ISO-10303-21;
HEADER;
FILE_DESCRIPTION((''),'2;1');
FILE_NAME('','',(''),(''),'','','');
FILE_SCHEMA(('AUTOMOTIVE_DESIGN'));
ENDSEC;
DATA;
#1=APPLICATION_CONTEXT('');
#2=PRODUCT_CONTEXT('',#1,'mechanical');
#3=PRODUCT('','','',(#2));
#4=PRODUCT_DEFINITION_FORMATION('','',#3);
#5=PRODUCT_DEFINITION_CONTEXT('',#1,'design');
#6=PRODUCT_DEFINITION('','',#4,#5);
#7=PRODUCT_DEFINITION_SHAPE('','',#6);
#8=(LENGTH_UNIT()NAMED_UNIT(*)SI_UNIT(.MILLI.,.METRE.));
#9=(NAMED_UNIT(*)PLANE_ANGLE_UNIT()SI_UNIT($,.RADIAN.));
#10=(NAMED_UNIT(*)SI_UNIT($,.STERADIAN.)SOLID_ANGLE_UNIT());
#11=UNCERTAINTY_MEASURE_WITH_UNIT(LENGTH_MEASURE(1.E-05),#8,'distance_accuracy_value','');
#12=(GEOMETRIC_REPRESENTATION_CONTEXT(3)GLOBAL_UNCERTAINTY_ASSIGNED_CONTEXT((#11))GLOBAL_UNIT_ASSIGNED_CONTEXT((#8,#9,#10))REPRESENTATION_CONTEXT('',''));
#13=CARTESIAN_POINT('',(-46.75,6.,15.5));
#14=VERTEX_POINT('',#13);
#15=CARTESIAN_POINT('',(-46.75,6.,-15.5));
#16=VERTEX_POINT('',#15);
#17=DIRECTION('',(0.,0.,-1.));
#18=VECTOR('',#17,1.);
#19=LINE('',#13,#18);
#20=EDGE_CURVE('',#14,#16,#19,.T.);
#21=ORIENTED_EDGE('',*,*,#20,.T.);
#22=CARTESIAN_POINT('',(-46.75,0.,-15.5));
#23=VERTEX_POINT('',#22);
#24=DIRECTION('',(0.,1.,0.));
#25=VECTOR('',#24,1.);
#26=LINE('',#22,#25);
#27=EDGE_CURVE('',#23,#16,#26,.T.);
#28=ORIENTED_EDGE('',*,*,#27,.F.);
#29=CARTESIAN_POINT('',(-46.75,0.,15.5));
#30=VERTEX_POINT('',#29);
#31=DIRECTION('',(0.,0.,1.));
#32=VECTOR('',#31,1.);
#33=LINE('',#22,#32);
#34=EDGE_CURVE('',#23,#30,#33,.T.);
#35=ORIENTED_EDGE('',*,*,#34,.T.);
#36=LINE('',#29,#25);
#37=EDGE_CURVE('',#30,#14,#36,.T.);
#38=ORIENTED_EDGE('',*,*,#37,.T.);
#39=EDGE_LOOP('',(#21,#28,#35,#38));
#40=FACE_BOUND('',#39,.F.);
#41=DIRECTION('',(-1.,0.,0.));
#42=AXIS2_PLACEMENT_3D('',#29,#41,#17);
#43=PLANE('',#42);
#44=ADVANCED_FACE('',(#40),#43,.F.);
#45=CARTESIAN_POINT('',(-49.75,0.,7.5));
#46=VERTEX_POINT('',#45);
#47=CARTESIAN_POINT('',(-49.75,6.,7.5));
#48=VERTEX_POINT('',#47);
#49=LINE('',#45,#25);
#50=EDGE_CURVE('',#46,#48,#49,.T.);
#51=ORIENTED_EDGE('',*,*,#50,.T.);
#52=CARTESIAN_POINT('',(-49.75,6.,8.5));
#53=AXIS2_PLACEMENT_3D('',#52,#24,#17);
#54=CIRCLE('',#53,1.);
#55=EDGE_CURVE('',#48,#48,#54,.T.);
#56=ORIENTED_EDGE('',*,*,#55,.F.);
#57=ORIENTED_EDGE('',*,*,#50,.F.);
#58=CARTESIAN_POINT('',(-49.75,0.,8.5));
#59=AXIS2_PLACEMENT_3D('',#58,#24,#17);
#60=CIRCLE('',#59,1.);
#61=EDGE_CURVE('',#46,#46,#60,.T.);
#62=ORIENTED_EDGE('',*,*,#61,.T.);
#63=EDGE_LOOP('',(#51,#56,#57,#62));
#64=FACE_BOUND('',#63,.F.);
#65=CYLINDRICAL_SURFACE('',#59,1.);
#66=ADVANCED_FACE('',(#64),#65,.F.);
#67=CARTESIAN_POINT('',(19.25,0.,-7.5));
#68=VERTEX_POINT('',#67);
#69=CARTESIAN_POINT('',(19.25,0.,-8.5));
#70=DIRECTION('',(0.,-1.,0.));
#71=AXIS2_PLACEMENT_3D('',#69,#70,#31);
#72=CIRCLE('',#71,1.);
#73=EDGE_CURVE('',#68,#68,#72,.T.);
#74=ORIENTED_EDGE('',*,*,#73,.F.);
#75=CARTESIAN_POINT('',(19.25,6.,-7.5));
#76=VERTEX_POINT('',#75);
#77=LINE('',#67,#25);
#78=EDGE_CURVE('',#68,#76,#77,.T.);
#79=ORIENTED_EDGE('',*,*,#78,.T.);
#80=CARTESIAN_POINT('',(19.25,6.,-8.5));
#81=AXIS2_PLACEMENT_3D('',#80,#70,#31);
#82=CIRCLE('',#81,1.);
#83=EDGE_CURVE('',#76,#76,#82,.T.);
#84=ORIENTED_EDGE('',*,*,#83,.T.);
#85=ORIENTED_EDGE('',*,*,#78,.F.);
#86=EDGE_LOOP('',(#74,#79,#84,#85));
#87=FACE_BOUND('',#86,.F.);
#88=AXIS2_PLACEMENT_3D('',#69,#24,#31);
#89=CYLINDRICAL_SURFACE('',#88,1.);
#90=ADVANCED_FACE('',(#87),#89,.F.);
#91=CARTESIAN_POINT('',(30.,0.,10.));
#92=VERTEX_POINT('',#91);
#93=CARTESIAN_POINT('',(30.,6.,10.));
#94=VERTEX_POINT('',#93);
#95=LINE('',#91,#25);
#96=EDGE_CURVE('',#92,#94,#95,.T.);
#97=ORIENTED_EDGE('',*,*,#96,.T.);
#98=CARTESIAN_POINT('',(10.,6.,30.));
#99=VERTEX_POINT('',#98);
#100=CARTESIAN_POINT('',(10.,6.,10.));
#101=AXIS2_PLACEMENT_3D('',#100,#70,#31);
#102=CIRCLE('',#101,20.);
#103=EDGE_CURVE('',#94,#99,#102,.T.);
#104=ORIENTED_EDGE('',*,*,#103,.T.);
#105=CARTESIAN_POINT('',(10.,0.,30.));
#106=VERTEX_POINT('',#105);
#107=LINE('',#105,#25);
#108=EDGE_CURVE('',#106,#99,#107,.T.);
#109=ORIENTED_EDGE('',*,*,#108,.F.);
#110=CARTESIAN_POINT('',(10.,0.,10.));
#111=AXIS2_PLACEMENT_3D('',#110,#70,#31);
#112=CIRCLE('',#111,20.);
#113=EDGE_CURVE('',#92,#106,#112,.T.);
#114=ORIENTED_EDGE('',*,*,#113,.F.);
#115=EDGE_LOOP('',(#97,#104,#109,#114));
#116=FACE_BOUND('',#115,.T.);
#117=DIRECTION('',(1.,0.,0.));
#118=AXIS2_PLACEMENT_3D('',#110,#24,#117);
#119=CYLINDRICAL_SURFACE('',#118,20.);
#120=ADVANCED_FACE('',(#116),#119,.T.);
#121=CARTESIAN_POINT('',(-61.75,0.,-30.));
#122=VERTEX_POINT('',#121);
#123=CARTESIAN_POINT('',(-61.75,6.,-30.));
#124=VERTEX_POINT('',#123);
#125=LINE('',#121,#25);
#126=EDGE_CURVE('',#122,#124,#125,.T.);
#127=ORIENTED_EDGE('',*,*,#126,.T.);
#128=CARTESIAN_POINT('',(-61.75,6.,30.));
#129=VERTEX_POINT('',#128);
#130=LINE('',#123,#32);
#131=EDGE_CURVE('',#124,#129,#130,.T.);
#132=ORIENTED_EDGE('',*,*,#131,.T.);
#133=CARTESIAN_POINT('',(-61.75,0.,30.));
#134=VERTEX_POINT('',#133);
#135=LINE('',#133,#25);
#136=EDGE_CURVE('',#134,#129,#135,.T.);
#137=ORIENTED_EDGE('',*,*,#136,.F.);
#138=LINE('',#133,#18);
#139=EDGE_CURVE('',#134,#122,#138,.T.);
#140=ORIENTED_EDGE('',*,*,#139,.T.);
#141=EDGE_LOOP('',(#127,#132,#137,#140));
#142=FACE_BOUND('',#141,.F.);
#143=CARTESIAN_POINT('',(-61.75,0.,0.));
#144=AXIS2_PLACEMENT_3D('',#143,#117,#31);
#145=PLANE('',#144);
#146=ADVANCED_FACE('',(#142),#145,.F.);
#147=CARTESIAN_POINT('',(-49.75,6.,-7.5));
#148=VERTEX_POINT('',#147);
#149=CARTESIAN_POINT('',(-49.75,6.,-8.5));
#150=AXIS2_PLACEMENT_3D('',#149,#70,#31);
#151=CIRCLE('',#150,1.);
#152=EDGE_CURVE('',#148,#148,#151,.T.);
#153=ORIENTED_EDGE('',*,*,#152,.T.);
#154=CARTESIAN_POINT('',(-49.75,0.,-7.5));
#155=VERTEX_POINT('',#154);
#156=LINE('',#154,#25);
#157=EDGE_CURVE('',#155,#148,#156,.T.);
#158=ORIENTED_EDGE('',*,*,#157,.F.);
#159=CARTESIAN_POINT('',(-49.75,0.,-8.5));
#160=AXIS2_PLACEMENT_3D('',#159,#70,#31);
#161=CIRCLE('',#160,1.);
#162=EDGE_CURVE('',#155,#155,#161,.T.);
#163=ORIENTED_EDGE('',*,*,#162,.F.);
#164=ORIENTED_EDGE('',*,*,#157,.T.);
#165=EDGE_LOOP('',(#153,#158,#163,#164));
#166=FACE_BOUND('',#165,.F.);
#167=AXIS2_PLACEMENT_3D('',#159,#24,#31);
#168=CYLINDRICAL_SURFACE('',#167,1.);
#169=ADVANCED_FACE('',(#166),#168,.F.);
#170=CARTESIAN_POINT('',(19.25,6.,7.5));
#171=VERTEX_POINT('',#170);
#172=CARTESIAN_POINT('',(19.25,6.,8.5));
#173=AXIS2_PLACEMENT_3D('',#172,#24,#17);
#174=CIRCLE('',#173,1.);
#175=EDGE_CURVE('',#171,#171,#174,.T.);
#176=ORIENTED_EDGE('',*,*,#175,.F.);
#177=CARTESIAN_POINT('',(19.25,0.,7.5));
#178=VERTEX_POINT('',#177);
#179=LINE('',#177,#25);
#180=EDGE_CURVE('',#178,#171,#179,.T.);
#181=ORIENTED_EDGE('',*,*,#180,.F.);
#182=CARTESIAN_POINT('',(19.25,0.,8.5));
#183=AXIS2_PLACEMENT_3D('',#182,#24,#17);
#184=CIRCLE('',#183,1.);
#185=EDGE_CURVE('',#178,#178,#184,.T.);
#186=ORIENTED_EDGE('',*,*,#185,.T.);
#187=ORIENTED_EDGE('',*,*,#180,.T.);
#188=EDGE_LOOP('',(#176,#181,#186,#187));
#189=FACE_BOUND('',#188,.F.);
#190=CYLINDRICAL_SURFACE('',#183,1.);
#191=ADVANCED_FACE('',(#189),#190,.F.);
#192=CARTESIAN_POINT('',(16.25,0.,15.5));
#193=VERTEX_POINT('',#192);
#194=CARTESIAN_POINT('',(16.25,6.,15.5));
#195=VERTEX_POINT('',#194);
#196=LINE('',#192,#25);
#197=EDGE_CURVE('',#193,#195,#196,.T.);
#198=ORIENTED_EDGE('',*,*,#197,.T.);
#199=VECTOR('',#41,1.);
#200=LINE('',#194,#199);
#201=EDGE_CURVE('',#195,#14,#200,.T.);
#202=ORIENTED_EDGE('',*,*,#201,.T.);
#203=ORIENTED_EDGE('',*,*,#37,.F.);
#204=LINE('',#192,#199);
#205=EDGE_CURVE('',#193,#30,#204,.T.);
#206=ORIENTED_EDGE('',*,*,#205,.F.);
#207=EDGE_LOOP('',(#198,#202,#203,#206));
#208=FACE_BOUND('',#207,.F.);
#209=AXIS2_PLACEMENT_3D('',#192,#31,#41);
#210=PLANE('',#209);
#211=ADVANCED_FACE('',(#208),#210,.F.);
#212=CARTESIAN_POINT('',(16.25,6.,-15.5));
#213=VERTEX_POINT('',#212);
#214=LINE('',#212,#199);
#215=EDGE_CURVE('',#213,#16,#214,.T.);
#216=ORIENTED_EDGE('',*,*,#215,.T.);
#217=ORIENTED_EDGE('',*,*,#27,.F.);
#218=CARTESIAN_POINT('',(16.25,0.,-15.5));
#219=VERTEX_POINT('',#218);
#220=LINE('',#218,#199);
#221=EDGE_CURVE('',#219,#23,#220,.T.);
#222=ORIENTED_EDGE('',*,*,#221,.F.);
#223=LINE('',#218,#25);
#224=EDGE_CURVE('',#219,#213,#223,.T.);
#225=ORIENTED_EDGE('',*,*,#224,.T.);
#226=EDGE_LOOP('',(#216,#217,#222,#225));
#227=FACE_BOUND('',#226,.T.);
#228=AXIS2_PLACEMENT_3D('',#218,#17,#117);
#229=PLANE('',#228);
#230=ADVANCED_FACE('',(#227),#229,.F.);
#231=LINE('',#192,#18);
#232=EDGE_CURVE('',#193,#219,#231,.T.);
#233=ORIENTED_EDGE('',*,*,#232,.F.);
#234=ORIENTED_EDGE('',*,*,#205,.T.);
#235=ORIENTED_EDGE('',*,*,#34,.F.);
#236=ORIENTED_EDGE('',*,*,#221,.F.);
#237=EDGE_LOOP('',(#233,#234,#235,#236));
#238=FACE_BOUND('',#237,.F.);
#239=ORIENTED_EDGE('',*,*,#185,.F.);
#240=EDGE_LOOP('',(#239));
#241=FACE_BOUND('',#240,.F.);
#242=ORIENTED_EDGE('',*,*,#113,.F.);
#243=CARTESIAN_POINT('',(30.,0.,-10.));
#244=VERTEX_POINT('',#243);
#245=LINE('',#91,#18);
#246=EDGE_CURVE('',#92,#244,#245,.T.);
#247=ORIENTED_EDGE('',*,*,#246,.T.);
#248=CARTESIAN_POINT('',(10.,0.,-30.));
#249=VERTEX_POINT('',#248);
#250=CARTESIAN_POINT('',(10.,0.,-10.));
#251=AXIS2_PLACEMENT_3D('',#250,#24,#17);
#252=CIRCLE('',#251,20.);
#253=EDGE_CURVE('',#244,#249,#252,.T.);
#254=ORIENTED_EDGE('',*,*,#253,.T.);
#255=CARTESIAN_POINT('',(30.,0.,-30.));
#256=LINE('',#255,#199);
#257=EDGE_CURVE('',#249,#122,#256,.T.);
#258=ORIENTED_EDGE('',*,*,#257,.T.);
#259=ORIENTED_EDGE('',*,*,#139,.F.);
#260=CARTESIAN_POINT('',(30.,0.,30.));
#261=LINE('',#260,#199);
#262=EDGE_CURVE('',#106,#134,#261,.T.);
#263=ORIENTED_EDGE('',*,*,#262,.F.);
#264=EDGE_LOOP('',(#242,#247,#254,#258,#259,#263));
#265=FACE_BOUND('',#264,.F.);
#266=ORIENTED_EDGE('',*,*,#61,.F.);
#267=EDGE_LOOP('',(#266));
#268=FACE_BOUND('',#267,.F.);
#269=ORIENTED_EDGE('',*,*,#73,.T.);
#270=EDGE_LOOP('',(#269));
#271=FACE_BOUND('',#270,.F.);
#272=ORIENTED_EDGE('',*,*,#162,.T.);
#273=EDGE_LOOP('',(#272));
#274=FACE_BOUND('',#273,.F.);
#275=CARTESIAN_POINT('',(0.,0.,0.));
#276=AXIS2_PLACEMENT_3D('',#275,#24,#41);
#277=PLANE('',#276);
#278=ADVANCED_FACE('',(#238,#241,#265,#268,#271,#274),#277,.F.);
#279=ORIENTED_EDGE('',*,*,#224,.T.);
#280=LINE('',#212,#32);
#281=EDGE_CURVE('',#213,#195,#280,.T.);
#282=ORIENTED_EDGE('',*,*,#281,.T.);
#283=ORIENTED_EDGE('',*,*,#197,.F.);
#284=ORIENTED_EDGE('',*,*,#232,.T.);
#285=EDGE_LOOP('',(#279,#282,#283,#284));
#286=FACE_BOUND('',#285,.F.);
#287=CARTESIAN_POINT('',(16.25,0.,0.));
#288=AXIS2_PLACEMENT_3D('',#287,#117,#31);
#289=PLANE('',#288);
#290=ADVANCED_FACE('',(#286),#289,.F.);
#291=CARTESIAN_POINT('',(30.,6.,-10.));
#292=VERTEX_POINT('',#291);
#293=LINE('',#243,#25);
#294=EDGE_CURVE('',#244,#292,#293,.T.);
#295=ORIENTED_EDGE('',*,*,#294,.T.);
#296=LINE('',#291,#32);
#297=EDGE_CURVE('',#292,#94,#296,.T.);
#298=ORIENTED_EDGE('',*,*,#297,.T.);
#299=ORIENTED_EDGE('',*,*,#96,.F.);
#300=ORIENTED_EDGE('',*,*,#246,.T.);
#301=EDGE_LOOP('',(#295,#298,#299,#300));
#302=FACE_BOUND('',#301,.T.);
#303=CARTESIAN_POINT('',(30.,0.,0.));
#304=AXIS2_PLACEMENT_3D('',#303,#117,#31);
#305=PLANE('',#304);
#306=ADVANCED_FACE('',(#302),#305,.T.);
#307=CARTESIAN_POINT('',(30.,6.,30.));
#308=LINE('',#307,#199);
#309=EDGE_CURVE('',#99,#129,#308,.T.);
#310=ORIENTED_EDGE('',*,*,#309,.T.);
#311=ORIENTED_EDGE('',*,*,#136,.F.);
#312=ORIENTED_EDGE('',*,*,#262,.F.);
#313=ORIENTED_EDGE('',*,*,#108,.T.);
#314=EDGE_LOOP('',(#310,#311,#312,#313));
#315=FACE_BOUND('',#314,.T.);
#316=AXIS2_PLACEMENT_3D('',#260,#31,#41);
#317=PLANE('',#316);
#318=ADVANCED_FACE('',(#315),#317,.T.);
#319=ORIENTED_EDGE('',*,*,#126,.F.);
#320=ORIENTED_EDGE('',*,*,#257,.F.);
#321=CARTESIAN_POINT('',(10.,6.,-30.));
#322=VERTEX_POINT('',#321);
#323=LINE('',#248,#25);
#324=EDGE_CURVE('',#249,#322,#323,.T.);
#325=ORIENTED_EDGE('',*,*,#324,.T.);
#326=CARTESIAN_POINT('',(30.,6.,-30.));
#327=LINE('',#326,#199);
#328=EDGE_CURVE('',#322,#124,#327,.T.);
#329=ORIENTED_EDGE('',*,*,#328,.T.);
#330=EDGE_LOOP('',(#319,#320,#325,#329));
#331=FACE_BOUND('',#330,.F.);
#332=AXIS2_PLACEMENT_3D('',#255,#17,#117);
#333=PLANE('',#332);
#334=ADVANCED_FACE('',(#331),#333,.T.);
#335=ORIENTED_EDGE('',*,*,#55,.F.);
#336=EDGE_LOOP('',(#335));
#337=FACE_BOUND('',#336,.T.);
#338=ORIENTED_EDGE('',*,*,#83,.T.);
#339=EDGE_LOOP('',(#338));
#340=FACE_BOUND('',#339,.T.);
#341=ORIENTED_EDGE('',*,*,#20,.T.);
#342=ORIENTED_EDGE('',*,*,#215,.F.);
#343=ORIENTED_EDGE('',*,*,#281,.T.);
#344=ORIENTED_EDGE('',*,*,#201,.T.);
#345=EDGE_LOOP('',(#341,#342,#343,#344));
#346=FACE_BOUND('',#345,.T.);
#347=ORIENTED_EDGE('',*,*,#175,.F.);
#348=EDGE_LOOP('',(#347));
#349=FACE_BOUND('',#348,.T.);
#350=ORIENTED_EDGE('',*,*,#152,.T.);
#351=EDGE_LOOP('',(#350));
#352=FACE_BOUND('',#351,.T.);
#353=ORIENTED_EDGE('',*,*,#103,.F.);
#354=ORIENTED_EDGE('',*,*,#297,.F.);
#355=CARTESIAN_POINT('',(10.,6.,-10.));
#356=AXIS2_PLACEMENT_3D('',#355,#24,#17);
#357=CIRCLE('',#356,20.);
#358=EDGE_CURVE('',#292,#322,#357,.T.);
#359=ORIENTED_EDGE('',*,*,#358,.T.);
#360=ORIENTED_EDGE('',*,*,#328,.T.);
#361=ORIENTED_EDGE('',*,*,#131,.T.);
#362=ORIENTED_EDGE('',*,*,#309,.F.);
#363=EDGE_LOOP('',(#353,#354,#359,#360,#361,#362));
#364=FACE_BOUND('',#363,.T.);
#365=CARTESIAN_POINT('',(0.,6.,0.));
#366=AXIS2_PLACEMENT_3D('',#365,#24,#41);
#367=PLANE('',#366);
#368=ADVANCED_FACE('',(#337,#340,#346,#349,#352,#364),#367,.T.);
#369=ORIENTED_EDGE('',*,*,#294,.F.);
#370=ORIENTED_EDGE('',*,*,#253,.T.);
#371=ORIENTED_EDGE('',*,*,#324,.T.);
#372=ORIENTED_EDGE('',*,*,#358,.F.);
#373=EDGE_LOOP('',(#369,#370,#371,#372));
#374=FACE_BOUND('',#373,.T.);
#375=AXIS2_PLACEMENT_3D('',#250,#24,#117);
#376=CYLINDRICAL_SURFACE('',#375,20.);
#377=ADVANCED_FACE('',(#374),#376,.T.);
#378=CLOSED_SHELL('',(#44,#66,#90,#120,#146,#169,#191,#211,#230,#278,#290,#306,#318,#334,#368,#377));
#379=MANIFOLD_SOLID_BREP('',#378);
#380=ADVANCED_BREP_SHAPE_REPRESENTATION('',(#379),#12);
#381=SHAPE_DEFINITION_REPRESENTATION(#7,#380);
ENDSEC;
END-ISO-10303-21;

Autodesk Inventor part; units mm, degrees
ref_plane "YZ Plane" through (0, 0, 0) normal (1, 0, 0) x (0, 1, 0)
ref_plane "XZ Plane" through (0, 0, 0) normal (0, 1, 0) x (-1, 0, 0)
ref_plane "XY Plane" through (0, 0, 0) normal (0, 0, 1) x (1, 0, 0)
sketch "Sketch1" plane through (0, 0, 0) normal (0, 1, 0) x (-1, 0, 0)
  line L0 (0, 0) -> (-16.25, 0)
  line L1 (0, 0) -> (46.75, 0)
  line L2 (300, 0) -> (330, 0) construction
  line L3 (330, 30) -> (-30, 30) construction
  line L4 (-16.25, 15.5) -> (46.75, 15.5)
  line L5 (46.75, 15.5) -> (46.75, 0)
  line L6 (46.75, -15.5) -> (-16.25, -15.5)
  line L7 (-16.25, -15.5) -> (-16.25, 0)
  line L8 (-16.25, 15.5) -> (46.75, -15.5) construction
  line L9 (46.75, 15.5) -> (-16.25, -15.5) construction
  line L10 (-19.25, 8.5) -> (49.75, 8.5) construction
  line L11 (49.75, 8.5) -> (49.75, -8.5) construction
  line L12 (49.75, -8.5) -> (-19.25, -8.5) construction
  line L13 (-19.25, -8.5) -> (-19.25, 8.5) construction
  line L14 (-19.25, 8.5) -> (49.75, -8.5) construction
  line L15 (49.75, 8.5) -> (-19.25, -8.5) construction
  line L16 (-30, 0) -> (-30, 30)
  line L17 (330, 0) -> (330, 30) construction
  line L18 (46.75, 0) -> (300, 0) construction
  line L19 (46.75, 0) -> (46.75, -15.5)
  line L20 (-16.25, 0) -> (-30, 0)
  line L21 (-16.25, 0) -> (-16.25, 15.5)
  line L22 (300, 0) -> (300, 18.5) construction
  line L23 (0, 0) -> (-30, 0) construction
  line L24 (46.75, 0) -> (61.75, 0)
  line L25 (61.75, 0) -> (61.75, 30)
  line L26 (-30, 30) -> (61.75, 30)
  point P0 (15.25, 0)
  point P1 (15.25, 0)
  point P2 (285, 0)
  dimension "d0" = 300
  dimension "d5" = 63
  dimension "d6" = 31
  dimension "d7" = 69
  dimension "d8" = 17
  dimension "d9" = 16.25
  dimension "d10" = 30
  dimension "d11" = 30
  dimension "d20" = 18.5
  dimension "d21" = 15
  dimension "d29" = 15
extrude "Extrusion1" add sketch "Sketch1" along normal blind 6 contours L20 L16 L26 L25 L24 L5 L4 L21
hole "Hole1" at (19.25, 0, 8.5) at (-49.75, 0, 8.5) direction (0, 1, 0) diameter 2 end through all
fillet "Fillet1" radius 20 1 edges at (30, 3, 30)
mirror "Mirror1" about plane through (30, 0, 0) normal (0, 0, -1)
properties part number "segment1c" material "Plywood, Finish"
